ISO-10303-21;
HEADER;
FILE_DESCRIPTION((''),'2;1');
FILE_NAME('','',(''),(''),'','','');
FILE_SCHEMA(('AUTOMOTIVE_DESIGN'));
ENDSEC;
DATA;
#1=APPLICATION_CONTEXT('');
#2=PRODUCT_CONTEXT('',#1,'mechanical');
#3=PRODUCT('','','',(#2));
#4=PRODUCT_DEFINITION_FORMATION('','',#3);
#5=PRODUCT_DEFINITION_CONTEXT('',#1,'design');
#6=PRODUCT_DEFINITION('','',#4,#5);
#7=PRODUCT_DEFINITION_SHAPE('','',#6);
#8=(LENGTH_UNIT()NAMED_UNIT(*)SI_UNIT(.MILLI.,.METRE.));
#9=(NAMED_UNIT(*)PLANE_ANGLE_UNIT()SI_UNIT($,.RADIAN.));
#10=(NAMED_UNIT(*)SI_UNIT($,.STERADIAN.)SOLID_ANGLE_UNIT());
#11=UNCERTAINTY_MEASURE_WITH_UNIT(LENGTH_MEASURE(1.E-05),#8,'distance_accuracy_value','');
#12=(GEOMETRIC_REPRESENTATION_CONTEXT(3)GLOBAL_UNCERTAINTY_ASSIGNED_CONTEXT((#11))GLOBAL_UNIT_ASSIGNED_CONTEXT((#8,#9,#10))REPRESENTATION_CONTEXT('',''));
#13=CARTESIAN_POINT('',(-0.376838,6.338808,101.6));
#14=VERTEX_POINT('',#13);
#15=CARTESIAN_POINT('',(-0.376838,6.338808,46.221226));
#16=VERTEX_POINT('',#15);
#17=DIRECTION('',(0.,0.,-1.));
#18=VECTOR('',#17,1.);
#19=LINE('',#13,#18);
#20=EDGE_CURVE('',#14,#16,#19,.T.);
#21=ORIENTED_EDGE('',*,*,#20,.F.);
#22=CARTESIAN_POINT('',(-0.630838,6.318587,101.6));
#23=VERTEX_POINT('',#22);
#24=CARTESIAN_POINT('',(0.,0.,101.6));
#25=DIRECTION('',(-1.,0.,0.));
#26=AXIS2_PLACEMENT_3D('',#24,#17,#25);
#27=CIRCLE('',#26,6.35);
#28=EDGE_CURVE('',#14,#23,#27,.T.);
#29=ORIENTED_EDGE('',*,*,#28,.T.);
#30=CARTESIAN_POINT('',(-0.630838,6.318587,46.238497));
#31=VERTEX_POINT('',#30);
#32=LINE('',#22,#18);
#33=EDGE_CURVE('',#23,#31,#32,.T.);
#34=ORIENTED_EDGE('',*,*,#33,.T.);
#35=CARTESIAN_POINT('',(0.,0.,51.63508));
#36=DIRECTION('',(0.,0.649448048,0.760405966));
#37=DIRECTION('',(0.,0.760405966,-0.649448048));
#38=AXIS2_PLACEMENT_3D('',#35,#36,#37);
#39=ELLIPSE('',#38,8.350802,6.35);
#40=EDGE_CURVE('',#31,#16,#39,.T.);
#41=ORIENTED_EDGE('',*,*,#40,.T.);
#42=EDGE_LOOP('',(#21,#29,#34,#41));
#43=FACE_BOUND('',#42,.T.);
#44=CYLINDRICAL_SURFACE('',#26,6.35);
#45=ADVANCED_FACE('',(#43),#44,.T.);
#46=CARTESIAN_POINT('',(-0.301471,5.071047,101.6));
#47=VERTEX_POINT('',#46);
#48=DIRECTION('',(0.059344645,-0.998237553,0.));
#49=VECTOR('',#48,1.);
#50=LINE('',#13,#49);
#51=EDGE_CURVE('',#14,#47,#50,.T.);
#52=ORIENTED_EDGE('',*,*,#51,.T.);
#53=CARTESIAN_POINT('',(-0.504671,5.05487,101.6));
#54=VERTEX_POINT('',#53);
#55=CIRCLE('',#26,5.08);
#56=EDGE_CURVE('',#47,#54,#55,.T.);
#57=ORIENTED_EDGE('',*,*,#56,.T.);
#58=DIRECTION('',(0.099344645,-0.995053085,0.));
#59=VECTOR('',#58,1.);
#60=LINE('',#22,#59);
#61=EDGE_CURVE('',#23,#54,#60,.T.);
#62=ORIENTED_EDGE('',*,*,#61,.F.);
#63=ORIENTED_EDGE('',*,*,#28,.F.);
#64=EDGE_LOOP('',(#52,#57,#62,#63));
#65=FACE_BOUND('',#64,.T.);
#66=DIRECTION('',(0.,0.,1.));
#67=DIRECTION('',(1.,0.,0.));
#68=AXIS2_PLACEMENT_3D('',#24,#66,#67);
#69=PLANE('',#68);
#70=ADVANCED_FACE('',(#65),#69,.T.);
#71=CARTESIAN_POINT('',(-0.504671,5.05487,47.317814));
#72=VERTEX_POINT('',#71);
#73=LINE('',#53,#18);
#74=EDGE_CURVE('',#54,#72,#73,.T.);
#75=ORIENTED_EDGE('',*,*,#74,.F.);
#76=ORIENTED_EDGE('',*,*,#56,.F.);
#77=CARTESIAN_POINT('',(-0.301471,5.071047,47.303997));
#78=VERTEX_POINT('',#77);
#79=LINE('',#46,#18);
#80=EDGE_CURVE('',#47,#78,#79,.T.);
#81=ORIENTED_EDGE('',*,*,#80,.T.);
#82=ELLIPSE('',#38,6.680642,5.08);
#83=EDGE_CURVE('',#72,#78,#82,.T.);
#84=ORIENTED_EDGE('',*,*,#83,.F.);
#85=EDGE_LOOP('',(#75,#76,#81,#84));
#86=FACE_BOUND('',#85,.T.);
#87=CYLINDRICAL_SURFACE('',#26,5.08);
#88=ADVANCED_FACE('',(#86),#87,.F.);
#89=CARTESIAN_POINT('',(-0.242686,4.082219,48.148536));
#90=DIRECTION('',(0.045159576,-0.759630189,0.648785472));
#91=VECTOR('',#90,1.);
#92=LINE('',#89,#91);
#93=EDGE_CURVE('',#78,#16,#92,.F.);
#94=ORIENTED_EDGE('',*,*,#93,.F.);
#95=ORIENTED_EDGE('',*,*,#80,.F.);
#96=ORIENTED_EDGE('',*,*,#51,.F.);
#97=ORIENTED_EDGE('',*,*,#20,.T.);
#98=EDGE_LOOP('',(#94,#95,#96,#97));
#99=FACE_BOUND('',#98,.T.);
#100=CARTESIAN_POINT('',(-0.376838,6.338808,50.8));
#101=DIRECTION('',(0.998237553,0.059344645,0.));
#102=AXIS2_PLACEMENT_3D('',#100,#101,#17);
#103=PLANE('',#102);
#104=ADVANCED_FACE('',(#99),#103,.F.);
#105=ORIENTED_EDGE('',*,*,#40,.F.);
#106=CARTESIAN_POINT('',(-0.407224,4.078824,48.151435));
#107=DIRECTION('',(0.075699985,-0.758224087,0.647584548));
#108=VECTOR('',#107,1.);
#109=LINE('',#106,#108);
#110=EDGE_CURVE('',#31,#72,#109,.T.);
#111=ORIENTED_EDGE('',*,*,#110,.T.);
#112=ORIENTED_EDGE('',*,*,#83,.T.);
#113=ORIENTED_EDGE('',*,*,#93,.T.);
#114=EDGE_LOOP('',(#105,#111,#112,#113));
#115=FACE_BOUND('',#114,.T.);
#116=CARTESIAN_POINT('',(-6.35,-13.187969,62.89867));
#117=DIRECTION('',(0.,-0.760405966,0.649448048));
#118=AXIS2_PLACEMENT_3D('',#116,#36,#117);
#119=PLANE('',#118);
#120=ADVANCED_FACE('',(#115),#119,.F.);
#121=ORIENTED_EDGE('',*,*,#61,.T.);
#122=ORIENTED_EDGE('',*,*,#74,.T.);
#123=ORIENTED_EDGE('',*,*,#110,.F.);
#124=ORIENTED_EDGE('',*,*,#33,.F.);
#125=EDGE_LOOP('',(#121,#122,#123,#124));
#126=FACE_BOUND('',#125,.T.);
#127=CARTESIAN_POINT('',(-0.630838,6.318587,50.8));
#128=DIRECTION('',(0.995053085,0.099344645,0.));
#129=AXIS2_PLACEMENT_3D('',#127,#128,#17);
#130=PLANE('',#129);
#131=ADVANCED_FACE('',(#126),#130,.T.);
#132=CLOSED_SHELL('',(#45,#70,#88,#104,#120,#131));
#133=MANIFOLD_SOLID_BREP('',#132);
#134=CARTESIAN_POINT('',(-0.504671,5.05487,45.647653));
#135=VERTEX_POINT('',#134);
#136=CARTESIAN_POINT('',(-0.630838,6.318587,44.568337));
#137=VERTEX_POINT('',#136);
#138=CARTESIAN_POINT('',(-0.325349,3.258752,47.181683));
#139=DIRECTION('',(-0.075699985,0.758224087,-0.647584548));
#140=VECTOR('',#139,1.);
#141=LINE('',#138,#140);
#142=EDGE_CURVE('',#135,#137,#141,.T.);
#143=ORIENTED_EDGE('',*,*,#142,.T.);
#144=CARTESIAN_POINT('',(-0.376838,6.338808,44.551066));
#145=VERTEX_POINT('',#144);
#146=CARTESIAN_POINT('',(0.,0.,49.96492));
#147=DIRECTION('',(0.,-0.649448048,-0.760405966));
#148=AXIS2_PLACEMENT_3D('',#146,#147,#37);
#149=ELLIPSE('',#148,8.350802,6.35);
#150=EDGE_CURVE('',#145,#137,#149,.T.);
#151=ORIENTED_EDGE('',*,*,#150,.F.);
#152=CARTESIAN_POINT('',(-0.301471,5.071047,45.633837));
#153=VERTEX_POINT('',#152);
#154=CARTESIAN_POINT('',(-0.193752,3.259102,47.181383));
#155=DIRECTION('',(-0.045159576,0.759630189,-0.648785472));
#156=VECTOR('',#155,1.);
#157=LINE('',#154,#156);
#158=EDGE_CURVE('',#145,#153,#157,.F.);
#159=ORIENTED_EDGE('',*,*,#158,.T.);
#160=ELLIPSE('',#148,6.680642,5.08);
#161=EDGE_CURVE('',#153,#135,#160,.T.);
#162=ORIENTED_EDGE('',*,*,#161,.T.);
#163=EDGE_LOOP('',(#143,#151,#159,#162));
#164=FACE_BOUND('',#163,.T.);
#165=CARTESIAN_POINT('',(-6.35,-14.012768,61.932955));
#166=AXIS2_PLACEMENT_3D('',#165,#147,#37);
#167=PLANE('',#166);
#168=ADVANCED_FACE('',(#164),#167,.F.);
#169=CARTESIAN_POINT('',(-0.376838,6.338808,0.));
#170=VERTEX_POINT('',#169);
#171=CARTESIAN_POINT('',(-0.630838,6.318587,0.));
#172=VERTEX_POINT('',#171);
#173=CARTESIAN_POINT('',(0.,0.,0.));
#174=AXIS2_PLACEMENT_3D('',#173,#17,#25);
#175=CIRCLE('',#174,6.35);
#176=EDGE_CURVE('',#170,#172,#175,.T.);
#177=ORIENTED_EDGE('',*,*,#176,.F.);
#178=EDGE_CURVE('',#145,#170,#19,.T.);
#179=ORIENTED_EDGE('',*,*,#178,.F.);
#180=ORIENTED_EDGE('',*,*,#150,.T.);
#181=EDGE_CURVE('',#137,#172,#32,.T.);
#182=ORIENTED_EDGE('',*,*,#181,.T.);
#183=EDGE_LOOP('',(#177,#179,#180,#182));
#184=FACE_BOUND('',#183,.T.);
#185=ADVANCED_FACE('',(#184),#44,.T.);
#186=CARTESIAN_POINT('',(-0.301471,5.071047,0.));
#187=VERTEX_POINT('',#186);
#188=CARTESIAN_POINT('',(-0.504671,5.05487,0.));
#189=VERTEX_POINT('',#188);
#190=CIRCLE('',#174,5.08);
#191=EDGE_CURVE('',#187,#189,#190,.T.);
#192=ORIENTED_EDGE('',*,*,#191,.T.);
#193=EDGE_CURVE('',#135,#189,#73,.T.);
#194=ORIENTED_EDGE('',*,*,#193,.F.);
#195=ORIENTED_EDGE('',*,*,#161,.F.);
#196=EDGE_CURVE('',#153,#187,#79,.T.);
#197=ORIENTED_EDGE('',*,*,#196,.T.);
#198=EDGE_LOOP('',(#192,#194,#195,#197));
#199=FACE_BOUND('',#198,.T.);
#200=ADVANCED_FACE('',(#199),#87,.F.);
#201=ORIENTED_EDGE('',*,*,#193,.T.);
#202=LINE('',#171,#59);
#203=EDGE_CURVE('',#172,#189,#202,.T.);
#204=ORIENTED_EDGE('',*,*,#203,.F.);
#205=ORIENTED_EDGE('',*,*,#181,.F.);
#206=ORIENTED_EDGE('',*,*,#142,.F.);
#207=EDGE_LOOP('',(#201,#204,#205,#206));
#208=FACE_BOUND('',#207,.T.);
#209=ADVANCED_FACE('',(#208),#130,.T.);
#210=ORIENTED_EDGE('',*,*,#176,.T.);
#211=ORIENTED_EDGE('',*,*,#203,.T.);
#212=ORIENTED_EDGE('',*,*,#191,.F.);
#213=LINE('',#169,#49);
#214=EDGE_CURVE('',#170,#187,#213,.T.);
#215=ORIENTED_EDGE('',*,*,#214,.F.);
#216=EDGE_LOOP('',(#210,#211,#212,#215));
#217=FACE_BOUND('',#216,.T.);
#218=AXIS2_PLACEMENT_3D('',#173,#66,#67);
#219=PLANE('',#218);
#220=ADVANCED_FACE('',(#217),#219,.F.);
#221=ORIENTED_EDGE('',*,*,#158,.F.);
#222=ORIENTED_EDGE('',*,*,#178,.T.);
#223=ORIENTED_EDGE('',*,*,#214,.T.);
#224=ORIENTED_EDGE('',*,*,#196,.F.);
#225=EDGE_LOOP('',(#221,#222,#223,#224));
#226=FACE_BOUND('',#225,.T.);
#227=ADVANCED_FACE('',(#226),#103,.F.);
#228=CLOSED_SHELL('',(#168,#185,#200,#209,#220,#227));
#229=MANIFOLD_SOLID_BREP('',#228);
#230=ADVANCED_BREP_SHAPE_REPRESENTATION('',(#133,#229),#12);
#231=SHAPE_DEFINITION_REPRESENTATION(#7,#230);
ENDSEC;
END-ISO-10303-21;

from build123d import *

# Parameters (mm, degrees)
LOFTED_BENDS1_DEPTH     = 101.6
CUT_EXTRUDE1_DEPTH      = 102.996102867
CUT_EXTRUDE1_DEPTH_BACK = 102.996102867


# Read off the part's stored shape, not the designer's step: Lofted Bends1
with BuildPart() as part:
    # Lofted Bends1 outline → Lofted Bends1 (new body)
    with BuildSketch(Plane.XY):
        with BuildLine():
            Line((-0.376838499, 6.338808464), (-0.301470799, 5.071046771))
            ThreePointArc((-0.301470799, 5.071046771), (0.40315195, -5.063977538), (-0.504670799, 5.05486967))
            Line((-0.504670799, 5.05486967), (-0.630838499, 6.318587088))
            ThreePointArc((-0.630838499, 6.318587088), (0.503939925, -6.329971924), (-0.376838499, 6.338808464))
        make_face()
    extrude(amount=LOFTED_BENDS1_DEPTH)

    # Sketch11 → Cut-Extrude1 (cut, two sides: drawn at the far end of the back side and taken through both)
    with BuildSketch(Plane(origin=(0, 0, 0), x_dir=(0, 0, -1), z_dir=(1, 0, 0)).offset(-CUT_EXTRUDE1_DEPTH_BACK)):
        Polygon((-62.898670134, -13.187969334), (-39.667045442, 14.012768356), (-38.701329866, 13.187969334), (-61.932954558, -14.012768356), align=None)
    extrude(amount=CUT_EXTRUDE1_DEPTH + CUT_EXTRUDE1_DEPTH_BACK, mode=Mode.SUBTRACT)


with BuildPart() as cut_extrude1_piece_1:
    # of the separate pieces the step leaves, piece 1, a body of its own (cut_extrude1_pieces)
    add(part.part.solids().sort_by_distance((-0.504670799, 5.05486967, 0))[0])


with BuildPart() as cut_extrude1_piece_2:
    # of the separate pieces the step leaves, piece 2, a body of its own (cut_extrude1_pieces)
    add(part.part.solids().sort_by_distance((-0.504670799, 5.05486967, 47.317813692))[0])


solid = Compound([cut_extrude1_piece_1.part, cut_extrude1_piece_2.part])
